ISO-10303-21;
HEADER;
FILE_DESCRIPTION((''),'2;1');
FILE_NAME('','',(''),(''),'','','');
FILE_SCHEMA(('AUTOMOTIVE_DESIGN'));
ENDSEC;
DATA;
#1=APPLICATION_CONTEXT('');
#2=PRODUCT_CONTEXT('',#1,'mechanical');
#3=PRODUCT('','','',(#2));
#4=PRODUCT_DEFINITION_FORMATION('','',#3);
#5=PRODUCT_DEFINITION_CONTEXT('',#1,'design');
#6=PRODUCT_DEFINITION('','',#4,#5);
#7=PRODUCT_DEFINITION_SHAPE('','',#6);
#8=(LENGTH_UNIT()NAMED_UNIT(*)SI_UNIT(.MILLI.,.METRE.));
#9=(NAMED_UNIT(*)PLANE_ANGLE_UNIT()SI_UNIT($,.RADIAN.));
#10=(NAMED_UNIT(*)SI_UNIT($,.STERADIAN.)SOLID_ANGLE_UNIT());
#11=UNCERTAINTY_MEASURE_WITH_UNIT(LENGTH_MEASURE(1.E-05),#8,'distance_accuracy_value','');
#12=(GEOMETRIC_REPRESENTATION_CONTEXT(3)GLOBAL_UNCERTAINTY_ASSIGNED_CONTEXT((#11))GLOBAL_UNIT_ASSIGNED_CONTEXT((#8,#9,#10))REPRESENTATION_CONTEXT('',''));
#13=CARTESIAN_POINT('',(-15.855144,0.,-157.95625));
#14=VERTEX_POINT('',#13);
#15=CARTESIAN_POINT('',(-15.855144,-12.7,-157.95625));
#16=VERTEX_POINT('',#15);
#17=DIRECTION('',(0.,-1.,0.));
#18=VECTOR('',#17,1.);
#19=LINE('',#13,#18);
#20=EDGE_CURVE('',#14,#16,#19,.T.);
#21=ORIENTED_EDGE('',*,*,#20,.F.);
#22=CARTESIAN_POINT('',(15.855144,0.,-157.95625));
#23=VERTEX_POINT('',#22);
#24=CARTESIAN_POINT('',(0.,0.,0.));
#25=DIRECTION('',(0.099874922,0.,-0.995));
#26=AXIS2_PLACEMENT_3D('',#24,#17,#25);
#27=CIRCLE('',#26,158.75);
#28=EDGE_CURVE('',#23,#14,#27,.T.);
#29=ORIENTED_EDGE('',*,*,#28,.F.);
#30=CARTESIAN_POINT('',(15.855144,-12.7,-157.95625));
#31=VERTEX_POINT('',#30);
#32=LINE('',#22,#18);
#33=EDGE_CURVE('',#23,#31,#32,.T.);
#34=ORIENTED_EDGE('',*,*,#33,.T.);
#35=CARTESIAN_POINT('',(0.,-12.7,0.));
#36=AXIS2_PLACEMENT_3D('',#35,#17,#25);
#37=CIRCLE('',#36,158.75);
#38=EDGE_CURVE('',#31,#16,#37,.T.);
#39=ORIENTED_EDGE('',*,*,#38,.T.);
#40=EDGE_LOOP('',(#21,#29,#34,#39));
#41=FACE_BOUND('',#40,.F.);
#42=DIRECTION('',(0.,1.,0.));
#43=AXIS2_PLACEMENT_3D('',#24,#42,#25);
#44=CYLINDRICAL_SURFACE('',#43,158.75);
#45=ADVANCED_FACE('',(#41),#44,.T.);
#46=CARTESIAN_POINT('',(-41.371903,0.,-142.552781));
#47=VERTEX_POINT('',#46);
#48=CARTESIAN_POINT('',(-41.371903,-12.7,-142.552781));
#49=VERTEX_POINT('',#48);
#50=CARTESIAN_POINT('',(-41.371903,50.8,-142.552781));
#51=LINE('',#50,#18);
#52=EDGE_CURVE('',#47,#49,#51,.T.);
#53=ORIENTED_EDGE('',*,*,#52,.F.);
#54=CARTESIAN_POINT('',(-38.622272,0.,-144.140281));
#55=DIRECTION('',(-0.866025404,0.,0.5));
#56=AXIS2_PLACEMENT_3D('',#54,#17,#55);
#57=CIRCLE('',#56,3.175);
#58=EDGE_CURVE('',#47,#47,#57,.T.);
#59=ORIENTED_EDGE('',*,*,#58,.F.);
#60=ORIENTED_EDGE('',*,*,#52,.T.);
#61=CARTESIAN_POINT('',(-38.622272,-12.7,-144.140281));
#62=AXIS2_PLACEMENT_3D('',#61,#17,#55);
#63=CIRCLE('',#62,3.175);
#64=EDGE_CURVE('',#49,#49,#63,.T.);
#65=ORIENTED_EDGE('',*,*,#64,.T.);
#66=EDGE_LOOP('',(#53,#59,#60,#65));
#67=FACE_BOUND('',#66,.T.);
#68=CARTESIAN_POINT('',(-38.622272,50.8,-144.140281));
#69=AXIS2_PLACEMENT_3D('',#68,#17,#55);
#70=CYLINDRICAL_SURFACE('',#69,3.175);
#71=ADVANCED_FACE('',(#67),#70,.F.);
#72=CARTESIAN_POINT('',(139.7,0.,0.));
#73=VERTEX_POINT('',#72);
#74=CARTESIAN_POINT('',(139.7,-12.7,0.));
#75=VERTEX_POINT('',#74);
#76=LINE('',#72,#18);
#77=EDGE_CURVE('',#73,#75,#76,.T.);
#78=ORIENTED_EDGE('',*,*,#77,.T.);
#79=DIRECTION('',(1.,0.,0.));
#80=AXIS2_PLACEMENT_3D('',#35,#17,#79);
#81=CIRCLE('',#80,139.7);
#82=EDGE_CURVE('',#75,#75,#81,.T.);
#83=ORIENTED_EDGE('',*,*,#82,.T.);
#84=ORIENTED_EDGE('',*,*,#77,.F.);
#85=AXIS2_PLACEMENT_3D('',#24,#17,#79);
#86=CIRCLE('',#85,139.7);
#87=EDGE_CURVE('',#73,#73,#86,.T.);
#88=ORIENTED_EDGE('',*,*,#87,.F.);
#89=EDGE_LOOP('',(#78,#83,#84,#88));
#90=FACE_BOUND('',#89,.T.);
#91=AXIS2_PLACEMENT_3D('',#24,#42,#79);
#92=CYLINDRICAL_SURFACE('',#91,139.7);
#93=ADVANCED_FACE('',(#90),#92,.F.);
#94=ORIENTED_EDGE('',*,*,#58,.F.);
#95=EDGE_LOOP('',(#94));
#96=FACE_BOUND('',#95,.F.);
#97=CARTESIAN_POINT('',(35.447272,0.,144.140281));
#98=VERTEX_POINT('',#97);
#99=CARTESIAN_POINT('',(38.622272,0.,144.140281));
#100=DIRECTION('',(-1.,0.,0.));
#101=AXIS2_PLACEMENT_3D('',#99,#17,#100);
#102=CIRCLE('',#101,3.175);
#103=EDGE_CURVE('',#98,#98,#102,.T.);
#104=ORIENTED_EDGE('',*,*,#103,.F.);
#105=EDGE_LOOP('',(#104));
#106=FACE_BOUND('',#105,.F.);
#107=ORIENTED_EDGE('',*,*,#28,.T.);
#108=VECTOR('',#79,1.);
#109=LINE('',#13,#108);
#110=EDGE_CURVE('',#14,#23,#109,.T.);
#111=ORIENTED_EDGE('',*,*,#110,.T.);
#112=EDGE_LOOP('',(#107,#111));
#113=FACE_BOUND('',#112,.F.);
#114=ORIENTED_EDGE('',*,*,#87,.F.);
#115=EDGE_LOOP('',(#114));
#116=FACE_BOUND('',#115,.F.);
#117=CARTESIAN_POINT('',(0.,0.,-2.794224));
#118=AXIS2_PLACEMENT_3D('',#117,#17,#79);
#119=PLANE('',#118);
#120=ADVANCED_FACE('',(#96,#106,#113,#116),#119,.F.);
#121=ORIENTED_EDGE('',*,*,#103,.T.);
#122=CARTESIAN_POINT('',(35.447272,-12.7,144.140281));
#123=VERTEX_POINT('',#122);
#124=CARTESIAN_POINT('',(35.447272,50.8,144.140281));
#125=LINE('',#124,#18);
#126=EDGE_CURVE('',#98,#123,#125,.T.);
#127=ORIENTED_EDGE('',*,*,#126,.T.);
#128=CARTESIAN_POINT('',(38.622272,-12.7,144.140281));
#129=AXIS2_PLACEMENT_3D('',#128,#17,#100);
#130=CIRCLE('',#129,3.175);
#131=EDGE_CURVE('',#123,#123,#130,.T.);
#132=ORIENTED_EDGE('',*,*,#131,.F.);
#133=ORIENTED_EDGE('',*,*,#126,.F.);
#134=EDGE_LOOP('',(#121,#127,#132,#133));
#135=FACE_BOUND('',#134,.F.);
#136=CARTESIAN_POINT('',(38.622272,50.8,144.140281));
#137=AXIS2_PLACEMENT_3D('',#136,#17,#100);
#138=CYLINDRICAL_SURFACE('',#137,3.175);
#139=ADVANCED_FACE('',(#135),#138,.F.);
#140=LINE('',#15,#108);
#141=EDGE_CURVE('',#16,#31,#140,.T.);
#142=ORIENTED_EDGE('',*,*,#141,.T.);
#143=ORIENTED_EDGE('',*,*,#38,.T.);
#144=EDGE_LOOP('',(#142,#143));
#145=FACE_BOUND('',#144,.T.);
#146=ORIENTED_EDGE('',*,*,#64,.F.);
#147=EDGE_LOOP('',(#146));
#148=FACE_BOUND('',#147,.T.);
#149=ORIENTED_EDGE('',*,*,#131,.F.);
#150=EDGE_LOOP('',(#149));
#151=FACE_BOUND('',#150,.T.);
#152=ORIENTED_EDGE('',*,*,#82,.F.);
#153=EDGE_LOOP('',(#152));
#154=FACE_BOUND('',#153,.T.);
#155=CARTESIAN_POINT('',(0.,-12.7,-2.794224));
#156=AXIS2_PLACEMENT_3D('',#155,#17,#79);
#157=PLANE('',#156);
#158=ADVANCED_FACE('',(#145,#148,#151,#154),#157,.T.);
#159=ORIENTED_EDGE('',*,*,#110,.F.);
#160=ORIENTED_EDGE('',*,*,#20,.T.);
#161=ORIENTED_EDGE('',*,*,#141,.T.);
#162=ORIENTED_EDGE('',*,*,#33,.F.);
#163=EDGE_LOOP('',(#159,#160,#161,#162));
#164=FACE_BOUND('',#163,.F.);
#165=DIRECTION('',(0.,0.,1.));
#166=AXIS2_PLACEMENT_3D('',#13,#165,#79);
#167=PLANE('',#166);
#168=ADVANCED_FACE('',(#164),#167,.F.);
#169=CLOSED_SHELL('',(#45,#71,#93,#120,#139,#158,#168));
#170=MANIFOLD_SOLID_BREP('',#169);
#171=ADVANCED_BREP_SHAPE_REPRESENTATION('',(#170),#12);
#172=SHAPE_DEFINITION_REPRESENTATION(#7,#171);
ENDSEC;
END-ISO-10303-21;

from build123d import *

# Parameters (mm, degrees)
F0_R     = 139.7
F1_DEPTH = 12.7
F6_D     = 6.35
F6_DEPTH = 50.8
F6_TIP   = 1.9077324654


# Not quite as in the source:
# - a pattern or mirror of a feature is missing from the dataset's text; its kind, count and spacing are read off the source's solid


with BuildPart() as f1:
    # F0 (on Front) → F1 (new body)
    with BuildSketch(Plane.XZ):
        with BuildLine():
            ThreePointArc((15.8551438321, -157.95625), (0, 158.75), (-15.8551438321, -157.95625))
            Line((-15.8551438321, -157.95625), (15.8551438321, -157.95625))
        make_face()
        Circle(F0_R, mode=Mode.SUBTRACT)
    extrude(amount=F1_DEPTH)

    # F6
    with Locations(Plane(origin=(0, 0, 0), x_dir=(1, 0, 0), z_dir=(0, 1, 0))):
        with Locations((38.6222720054, -144.140281428)):
            f6 = Hole(F6_D / 2, depth=F6_DEPTH)
            with Locations((0, 0, -(F6_DEPTH + F6_TIP / 2))):  # 118° drill point
                Cone(0, F6_D / 2, F6_TIP, mode=Mode.SUBTRACT)

    # F6_copies: F6 across plane
    add(f6.mirror(Plane(origin=(0, 0, 0), x_dir=(-0.9659258263, 0, 0.2588190451), z_dir=(-0.2588190451, 0, -0.9659258263))), mode=Mode.SUBTRACT)


solid = f1.part
